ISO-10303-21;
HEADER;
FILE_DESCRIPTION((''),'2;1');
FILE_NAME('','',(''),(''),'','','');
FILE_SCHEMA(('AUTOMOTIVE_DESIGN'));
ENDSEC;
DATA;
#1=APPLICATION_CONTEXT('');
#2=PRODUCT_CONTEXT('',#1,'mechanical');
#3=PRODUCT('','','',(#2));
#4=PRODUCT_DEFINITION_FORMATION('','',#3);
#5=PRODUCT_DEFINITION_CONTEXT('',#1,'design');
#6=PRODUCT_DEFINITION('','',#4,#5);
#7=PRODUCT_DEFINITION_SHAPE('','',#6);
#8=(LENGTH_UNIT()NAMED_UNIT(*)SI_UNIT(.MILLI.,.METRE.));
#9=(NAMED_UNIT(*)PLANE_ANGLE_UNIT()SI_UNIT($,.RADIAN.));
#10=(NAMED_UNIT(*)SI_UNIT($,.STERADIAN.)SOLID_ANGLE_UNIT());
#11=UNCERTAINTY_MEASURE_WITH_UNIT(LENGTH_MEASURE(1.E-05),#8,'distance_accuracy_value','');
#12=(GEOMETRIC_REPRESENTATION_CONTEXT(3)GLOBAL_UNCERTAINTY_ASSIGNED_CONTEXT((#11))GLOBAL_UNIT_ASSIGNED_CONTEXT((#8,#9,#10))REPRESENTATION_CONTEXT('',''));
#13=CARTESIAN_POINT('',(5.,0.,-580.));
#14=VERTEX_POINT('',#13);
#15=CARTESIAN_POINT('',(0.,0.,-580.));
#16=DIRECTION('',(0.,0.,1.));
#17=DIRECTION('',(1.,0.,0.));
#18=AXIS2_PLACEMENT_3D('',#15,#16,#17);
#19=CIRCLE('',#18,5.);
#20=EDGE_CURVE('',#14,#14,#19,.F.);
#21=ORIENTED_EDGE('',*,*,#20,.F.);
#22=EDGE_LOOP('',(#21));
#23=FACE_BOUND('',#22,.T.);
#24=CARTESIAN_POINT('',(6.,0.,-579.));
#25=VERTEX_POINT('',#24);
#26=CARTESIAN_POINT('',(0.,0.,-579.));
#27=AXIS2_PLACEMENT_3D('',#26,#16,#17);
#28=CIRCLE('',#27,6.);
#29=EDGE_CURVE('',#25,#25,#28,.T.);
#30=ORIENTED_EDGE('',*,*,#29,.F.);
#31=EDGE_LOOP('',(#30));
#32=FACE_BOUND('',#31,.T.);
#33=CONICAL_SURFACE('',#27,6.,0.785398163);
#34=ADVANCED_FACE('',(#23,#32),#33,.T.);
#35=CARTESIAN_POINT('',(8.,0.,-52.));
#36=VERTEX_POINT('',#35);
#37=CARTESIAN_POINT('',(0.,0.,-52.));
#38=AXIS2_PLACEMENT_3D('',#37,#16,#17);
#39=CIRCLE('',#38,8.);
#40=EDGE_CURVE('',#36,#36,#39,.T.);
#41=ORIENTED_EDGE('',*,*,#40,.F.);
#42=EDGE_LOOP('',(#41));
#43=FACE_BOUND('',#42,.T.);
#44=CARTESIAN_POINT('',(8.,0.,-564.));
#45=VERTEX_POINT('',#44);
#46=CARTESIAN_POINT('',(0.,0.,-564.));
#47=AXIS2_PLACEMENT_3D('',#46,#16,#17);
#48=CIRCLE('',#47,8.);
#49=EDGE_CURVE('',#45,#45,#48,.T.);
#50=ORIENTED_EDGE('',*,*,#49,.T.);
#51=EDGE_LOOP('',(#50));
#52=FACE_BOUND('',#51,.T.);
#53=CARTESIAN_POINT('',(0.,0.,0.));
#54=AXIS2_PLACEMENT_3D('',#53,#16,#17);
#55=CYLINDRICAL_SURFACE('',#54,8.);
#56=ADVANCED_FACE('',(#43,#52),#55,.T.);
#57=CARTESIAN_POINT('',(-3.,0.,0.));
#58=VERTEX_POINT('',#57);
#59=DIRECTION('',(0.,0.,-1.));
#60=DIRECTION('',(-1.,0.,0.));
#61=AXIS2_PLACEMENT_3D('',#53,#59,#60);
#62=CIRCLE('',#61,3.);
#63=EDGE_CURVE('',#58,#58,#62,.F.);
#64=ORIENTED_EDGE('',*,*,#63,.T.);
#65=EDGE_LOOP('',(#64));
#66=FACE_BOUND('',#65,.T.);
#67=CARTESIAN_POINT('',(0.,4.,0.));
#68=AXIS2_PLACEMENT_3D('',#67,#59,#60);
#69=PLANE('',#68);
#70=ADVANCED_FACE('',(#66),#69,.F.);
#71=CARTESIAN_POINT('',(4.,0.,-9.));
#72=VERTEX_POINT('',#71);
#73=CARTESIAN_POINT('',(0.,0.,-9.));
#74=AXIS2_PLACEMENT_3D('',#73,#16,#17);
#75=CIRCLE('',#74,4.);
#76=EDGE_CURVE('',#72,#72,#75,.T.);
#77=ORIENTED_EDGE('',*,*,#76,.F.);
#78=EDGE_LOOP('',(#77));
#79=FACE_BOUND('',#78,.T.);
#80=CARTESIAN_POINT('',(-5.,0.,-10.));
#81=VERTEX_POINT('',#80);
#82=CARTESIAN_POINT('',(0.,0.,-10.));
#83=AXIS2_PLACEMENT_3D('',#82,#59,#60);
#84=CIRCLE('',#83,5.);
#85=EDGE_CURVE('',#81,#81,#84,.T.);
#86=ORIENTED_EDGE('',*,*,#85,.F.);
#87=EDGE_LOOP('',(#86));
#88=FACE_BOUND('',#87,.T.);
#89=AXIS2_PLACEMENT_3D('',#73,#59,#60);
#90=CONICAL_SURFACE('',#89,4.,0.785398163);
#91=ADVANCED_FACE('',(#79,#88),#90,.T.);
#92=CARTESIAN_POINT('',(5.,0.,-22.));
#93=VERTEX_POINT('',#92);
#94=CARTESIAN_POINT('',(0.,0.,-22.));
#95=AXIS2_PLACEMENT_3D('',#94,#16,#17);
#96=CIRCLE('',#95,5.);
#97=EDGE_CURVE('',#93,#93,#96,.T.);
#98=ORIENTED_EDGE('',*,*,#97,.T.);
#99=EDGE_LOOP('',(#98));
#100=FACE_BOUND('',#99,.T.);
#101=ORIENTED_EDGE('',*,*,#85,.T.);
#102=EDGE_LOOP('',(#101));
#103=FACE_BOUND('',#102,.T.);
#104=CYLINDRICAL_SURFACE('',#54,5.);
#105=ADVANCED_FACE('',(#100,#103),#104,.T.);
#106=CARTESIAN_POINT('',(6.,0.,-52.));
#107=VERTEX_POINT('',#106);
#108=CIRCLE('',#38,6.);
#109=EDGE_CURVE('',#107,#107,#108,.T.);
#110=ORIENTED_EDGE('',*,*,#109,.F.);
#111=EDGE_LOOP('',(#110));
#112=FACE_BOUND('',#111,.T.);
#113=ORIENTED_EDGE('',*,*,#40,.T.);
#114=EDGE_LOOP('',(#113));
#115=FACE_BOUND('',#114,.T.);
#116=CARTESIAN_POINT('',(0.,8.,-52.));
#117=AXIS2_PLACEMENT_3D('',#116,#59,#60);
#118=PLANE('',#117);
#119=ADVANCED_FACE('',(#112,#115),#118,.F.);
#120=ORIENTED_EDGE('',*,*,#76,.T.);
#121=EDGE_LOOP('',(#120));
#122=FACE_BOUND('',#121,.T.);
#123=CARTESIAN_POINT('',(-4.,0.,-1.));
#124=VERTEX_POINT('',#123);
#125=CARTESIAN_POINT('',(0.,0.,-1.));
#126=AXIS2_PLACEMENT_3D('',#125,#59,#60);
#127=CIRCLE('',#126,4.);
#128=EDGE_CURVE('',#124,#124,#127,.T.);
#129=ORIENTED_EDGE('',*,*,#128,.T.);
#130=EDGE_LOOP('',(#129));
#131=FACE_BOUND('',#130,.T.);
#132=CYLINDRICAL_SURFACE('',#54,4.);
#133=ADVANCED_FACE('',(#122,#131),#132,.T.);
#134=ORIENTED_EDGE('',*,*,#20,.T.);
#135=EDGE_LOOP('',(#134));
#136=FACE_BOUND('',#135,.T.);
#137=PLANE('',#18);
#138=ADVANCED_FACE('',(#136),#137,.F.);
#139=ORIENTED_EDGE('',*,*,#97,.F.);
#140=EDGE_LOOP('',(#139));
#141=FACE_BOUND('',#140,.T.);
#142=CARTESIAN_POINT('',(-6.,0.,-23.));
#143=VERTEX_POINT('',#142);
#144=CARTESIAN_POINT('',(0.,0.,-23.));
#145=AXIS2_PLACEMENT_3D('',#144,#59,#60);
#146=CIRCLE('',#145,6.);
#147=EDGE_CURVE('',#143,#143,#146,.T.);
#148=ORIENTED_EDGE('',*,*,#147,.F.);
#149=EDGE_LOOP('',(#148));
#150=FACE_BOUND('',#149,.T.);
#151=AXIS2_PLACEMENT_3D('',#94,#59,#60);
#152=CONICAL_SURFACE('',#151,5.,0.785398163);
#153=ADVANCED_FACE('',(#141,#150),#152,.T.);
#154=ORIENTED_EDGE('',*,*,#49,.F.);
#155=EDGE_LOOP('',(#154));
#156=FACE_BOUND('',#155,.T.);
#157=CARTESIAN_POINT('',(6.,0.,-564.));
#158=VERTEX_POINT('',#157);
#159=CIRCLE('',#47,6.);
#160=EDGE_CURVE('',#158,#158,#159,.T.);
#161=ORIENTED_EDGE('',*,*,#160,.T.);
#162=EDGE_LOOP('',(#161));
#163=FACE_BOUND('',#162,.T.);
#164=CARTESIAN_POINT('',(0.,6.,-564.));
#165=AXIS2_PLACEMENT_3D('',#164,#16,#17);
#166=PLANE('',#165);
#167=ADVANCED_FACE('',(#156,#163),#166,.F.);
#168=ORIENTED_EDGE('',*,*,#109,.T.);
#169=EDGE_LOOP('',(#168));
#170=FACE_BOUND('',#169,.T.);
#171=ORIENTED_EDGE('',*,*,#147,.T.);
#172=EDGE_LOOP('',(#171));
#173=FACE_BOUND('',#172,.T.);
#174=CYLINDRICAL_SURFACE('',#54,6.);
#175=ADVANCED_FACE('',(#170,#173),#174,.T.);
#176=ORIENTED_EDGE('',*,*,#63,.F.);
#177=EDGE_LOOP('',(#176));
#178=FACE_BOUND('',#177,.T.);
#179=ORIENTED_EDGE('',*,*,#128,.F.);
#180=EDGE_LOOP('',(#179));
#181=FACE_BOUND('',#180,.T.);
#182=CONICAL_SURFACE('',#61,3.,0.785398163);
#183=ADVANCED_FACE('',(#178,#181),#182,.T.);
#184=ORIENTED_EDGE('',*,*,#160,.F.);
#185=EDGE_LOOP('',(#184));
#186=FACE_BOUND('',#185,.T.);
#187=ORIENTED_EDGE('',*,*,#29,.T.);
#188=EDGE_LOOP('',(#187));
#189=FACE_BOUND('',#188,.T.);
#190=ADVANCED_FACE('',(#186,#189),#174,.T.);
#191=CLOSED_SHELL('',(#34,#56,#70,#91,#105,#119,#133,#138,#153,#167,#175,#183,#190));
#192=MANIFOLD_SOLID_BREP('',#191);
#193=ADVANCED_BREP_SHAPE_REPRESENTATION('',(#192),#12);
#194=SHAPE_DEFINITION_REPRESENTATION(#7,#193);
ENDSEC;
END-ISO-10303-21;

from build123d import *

# Parameters (mm, degrees)
SFAZOWANIE1_SIZE = 1
SFAZOWANIE2_SIZE = 1


with BuildPart() as part:
    # Szkic1 → Obrót1 (revolve)
    with BuildSketch(Plane(origin=(0, 0, 0), x_dir=(0, 0, -1), z_dir=(1, 0, 0)), mode=Mode.PRIVATE) as obr_t1_sk:
        Polygon((0, 0), (580, 0), (580, 6), (564, 6), (564, 8), (52, 8), (52, 6), (22, 6), (22, 5), (9, 5), (9, 4), (0, 4), align=None)
    revolve(obr_t1_sk.sketch.rotate(Axis((0, 0, 0), (0, 0, -1)), 90), axis=Axis((0, 0, 0), (0, 0, -1)))

    # Sfazowanie1
    sfazowanie1_edges = [part.edges().sort_by_distance(p)[0] for p in [
        (-6, 0, -22),
        (-4, 0, 0),
        (-5, 0, -9),
    ]]
    chamfer(sfazowanie1_edges, length=SFAZOWANIE1_SIZE - 0.0001)  # a hair under: the kernel refuses the full size

    # Sfazowanie2
    sfazowanie2_edges = [part.edges().sort_by_distance(p)[0] for p in [
        (-6, 0, -580),
    ]]
    chamfer(sfazowanie2_edges, length=SFAZOWANIE2_SIZE)


solid = part.part
